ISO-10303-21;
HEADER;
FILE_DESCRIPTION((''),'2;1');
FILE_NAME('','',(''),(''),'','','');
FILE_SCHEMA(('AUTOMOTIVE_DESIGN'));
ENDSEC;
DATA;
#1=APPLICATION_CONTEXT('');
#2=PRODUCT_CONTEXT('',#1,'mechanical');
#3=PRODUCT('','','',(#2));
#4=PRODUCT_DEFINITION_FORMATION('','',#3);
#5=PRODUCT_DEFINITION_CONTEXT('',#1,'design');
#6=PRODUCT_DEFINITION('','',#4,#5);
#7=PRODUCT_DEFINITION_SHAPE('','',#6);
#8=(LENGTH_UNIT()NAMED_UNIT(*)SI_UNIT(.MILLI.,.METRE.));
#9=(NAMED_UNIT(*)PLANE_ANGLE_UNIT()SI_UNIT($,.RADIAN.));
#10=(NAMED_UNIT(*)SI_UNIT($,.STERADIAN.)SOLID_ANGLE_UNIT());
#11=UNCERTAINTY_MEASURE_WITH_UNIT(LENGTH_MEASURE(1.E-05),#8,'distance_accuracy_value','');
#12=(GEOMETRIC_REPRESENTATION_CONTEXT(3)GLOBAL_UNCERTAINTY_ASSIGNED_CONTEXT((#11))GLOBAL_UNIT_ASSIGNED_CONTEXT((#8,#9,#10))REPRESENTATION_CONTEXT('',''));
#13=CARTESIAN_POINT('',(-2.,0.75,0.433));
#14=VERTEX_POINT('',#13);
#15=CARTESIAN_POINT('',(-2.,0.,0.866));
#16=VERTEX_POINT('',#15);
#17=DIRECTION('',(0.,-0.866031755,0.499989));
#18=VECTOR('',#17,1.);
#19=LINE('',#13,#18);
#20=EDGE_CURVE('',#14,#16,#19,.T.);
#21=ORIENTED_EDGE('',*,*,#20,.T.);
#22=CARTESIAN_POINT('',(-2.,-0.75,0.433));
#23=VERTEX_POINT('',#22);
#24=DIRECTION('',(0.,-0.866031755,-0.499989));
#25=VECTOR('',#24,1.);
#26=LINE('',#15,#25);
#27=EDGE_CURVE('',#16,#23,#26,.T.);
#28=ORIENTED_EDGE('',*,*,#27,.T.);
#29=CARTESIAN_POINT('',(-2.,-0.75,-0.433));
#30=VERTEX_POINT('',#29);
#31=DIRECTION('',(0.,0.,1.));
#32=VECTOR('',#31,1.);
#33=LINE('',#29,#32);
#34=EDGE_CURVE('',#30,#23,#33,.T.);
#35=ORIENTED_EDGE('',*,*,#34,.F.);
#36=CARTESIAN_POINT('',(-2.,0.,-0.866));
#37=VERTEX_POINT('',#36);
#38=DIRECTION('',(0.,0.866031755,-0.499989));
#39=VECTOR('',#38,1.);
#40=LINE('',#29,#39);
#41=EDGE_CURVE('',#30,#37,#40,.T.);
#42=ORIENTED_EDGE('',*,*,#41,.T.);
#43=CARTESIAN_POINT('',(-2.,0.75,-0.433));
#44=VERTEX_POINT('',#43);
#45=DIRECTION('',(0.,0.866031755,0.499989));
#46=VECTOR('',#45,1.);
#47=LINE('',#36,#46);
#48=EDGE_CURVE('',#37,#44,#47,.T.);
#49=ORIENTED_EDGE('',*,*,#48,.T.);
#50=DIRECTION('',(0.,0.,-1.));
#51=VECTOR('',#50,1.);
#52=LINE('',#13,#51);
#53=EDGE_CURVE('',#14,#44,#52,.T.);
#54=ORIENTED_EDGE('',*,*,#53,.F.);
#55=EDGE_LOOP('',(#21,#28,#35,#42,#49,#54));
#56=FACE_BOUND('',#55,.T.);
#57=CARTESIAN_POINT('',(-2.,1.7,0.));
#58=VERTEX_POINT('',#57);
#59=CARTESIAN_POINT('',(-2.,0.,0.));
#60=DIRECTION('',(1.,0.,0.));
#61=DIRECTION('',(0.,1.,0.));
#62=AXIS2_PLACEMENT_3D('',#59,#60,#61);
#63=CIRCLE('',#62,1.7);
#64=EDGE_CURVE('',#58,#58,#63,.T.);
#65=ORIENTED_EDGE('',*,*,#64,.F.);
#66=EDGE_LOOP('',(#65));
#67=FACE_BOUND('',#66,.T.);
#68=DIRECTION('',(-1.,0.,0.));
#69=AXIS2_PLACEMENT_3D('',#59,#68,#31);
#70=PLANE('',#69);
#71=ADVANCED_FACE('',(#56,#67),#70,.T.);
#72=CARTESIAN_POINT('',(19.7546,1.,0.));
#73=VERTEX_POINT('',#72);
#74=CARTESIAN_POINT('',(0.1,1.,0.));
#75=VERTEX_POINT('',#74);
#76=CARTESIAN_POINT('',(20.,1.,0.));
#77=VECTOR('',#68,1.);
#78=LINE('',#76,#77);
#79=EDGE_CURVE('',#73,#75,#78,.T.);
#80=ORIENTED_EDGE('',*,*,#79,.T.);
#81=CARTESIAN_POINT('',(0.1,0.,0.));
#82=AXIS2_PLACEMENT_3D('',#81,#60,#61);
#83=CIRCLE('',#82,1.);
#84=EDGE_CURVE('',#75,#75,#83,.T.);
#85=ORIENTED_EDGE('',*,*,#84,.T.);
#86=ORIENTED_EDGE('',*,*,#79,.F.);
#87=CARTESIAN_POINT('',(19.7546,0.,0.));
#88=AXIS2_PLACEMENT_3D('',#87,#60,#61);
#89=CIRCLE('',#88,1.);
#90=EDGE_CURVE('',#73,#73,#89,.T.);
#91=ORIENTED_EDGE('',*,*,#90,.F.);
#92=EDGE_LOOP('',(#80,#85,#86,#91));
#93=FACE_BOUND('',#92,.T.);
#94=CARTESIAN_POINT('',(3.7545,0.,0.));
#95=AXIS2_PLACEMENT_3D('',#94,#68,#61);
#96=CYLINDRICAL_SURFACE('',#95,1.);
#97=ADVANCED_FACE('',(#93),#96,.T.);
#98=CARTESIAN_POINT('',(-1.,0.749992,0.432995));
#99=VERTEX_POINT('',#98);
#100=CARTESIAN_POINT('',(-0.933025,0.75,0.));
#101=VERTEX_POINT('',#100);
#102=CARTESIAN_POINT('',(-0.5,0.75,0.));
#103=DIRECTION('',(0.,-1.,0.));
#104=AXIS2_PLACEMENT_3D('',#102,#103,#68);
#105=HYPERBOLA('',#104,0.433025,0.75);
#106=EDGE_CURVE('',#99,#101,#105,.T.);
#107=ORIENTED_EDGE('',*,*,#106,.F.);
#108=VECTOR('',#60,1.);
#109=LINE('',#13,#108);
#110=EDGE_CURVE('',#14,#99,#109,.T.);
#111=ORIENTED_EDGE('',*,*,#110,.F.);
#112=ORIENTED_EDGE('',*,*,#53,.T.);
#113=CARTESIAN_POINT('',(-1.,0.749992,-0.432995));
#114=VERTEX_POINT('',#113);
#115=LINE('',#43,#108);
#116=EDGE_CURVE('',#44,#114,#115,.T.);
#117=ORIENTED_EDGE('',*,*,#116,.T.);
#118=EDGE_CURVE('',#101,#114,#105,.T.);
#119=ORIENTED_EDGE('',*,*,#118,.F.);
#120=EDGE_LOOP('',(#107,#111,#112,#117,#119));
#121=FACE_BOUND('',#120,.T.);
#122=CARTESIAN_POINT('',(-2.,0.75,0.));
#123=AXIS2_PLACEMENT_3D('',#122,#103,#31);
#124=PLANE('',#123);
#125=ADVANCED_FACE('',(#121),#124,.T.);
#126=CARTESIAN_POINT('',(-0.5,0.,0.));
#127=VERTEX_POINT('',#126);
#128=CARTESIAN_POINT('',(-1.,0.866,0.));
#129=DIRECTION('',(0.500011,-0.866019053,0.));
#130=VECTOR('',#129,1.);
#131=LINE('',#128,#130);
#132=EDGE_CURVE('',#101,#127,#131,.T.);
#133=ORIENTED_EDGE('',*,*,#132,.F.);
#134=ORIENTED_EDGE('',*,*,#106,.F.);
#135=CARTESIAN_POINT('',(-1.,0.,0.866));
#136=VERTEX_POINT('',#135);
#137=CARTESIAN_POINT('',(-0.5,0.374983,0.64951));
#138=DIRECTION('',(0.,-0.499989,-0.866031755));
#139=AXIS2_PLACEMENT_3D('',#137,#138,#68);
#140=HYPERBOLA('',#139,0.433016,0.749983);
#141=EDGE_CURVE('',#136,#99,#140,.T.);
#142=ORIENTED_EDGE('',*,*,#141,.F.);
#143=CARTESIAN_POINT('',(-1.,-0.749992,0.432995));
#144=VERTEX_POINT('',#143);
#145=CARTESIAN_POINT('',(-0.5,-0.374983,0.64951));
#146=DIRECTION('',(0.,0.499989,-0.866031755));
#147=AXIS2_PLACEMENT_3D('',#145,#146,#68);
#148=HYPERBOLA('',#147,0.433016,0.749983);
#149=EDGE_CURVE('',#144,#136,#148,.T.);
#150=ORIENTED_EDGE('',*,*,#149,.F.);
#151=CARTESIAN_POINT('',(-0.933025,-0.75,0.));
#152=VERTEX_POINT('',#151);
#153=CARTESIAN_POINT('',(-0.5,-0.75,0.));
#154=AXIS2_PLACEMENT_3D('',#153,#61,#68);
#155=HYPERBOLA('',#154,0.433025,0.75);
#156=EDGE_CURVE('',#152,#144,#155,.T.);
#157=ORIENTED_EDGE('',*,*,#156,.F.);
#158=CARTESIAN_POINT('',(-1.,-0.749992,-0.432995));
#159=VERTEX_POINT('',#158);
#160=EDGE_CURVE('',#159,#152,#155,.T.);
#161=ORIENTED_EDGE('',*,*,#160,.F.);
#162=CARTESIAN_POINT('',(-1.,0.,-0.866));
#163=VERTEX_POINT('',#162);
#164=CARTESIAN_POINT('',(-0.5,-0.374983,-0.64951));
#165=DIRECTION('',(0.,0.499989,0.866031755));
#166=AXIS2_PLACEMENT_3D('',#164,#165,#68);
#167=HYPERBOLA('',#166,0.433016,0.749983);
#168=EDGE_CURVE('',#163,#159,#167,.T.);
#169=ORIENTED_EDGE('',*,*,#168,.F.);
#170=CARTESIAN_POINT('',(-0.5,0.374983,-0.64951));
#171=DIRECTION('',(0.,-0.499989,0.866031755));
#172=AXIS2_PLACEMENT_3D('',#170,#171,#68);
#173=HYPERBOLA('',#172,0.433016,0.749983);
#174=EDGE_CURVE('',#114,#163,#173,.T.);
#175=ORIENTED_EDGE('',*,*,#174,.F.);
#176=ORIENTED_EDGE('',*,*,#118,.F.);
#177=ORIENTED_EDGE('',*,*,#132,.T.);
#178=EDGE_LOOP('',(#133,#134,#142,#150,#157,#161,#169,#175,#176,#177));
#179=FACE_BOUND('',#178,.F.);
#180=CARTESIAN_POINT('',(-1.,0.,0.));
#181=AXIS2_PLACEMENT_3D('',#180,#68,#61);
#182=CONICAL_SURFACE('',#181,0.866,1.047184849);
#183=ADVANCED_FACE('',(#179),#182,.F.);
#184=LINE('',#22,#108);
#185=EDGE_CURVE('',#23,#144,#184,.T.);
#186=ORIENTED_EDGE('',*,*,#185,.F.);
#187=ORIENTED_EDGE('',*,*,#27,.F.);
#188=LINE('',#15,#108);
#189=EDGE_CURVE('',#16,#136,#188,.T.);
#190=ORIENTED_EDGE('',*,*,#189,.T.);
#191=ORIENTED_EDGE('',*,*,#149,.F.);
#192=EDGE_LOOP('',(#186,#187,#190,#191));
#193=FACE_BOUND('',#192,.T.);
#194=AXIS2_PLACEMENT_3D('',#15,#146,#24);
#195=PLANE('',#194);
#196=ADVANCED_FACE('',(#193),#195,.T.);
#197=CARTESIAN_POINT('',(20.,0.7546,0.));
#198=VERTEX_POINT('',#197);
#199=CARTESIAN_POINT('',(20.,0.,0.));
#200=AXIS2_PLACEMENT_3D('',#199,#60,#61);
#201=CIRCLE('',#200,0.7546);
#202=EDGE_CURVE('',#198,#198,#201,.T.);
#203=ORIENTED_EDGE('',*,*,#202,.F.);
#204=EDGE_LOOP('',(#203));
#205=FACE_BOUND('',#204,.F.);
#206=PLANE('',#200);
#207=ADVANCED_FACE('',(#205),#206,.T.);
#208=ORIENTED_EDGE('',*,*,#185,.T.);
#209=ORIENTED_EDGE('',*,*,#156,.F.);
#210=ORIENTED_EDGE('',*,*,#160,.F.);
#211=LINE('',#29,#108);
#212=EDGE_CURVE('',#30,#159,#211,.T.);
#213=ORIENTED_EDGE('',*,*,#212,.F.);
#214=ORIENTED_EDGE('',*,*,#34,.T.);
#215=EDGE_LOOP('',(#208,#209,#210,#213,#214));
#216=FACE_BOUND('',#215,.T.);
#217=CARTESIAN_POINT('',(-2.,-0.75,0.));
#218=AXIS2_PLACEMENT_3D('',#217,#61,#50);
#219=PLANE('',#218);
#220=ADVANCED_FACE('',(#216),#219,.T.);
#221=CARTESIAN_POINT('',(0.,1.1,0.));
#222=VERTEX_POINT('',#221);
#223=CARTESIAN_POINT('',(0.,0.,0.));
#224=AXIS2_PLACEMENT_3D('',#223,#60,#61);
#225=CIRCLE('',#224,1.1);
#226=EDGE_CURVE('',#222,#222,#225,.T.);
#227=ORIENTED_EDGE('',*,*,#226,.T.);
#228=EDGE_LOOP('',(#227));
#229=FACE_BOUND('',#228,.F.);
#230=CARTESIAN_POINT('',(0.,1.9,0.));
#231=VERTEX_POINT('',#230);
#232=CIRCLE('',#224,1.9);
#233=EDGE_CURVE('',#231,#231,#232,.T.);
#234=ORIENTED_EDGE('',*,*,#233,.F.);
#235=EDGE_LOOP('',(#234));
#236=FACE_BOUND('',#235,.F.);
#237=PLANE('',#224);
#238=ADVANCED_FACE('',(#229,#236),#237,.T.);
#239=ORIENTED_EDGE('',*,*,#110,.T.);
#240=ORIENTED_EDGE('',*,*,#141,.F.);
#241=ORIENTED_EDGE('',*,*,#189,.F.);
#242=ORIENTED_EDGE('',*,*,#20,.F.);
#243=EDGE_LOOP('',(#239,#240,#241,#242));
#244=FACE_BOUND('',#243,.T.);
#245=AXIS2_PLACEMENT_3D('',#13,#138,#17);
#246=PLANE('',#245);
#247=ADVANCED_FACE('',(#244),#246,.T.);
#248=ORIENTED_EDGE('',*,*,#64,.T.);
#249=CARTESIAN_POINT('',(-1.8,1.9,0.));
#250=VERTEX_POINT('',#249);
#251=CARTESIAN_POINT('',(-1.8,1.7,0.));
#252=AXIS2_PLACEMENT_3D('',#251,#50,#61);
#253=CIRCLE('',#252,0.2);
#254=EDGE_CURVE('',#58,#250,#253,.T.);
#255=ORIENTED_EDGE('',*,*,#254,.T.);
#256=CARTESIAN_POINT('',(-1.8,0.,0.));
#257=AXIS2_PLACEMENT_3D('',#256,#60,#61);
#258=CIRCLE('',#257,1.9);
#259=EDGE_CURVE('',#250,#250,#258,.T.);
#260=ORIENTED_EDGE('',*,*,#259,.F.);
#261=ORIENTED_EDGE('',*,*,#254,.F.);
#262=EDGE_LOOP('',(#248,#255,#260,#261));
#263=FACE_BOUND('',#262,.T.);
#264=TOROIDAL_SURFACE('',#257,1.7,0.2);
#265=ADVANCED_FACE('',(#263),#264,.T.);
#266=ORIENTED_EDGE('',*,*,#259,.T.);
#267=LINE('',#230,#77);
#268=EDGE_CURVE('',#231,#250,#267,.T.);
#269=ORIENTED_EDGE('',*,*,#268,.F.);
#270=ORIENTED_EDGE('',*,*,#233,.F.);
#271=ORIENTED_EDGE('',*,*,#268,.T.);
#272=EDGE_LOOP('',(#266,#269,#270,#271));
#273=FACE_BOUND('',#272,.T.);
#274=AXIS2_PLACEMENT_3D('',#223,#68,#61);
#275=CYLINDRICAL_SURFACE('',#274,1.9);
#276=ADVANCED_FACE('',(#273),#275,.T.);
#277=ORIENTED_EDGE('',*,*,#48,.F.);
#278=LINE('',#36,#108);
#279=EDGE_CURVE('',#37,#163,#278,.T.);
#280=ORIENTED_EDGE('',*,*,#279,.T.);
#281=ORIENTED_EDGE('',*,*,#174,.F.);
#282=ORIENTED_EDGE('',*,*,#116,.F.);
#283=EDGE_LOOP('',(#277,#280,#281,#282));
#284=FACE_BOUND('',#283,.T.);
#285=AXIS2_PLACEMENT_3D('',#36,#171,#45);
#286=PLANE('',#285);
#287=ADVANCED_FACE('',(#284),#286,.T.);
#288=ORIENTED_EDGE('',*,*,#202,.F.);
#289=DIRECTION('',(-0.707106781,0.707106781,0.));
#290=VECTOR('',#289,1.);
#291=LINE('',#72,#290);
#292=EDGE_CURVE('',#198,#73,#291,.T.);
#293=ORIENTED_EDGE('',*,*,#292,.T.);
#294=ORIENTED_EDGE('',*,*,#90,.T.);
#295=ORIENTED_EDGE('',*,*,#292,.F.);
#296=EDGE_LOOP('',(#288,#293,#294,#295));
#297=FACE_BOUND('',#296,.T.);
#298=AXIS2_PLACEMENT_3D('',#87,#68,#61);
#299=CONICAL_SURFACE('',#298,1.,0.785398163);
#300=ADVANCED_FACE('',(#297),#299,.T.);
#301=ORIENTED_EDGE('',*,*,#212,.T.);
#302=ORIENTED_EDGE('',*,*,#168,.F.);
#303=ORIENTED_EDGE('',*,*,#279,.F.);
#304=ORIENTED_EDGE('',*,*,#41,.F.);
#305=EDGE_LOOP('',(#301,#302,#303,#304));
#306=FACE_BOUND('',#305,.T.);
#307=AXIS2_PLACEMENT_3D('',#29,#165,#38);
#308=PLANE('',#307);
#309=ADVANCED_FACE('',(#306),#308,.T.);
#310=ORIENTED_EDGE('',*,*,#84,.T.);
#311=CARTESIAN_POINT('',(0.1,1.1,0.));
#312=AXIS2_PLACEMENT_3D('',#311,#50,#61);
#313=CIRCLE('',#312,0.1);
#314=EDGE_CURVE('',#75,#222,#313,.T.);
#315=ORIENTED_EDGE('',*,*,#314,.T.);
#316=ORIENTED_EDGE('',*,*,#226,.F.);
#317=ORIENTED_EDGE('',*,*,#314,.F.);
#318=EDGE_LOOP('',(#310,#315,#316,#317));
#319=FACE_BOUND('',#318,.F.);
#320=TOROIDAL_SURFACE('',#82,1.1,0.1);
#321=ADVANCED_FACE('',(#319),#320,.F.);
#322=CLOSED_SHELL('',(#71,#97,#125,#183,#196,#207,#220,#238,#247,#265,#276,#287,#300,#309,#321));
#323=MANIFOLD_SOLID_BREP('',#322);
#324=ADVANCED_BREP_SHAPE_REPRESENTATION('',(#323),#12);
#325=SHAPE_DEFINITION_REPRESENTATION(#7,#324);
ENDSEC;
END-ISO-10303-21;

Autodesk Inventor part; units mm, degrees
ref_plane "YZ Plane" through (0, 0, 0) normal (1, 0, 0) x (0, 1, 0)
ref_plane "XZ Plane" through (0, 0, 0) normal (0, 1, 0) x (-1, 0, 0)
sketch "Sketch1" plane through (0, 0, 0) normal (0, 0, 1) x (1, 0, 0)
  line L0 (-0.5, 0) -> (20, 0)
  line L1 (20, 0) -> (20, 1)
  line L2 (20, 1) -> (4, 1)
  line L3 (4, 1) -> (3.7545, 1)
  line L4 (3.7545, 1) -> (0, 1)
  line L5 (0, 1) -> (0, 1.9)
  line L6 (0, 1.9) -> (-2, 1.9)
  line L7 (-2, 1.9) -> (-2, 0.866)
  line L8 (-2, 0.866) -> (-1, 0.866)
  line L9 (-1, 0.866) -> (-0.5, 0)
  line L10 (-6.4, 0) -> (24.4, 0) projected
  line L11 (0, -0.38) -> (0, 2.28) projected
  line L12 (4, 1) -> (0, 1) construction
  dimension "d1" = 16
  dimension "d2" = 0.2455
  dimension "d3" = 2
  dimension "d4" = 1
  dimension "d5" = 60
  dimension "d6" = 2
  dimension "d7" = 2
  dimension "d8" = 1.7321
  dimension "d9" = 3.8
  dimension "d26" = 20
revolve "Body" add sketch "Sketch1" angle 360 about axis through (-0.5, 0, 0) along (1, 0, 0)
sketch "Sketch2" plane through (-2, 0, 0) normal (-1, 0, 0) x (0, 0, 1)
  circle A0 centre (0, 0) radius 0.866 projected
  line L0 (0, -2.66) -> (0, 2.66) projected
  line L1 (-2.66, 0) -> (2.66, 0) projected
  line L2 (0.866, 0) -> (0.433, -0.75)
  line L3 (0.433, -0.75) -> (-0.433, -0.75)
  line L4 (-0.433, -0.75) -> (-0.866, 0)
  line L5 (-0.866, 0) -> (-0.433, 0.75)
  line L6 (-0.433, 0.75) -> (0.433, 0.75)
  line L7 (0.433, 0.75) -> (0.866, 0)
extrude "Slot" add sketch "Sketch2" against normal up to next contours L7 A0 | A0 L2 | L6 L0 A0 | A0 L0 L3 | L0 L6 A0 | A0 L3 L0 | L4 A0 | A0 L5
fillet "Fillet1" radius 0.2 1 edges at (-2, -1.9, 0)
thread "Thread" size "M2x0.4" class "6g" standard "ISO Metric profile" length 16
chamfer "Chamfer1" distance 0.2454 distance2 0.2454 1 edges at (20, -1, 0) measured on face at (20, -0.4443, -0.4503)
ref_plane "Work Plane1" through (29, 0, 0) normal (0, -1, 0) x (1, 0, 0)
fillet "Fillet2" radius 0.1 1 edges at (0, -1, 0)
equation "\"d30\" = R"
equation "\"d17\" = RR"
equation "\"d13\" = GEL"
equation "\"d15\" = -0.5 * SPD + 0.5 * GD"
equation "\"d16\" = GUL"
equation "\"d1\" = GEL"
equation "\"d3\" = KOH"
equation "\"d4\" = INTI"
equation "\"d6\" = GD"
equation "\"d7\" = BDM"
equation "\"d8\" = 1.1547 * SW"
equation "\"d9\" = KOD"
equation "\"d26\" = NLG"
equation "\"GD\" = NND"
equation "\"NLG\" = 20"
equation "\"GEL\" = 16"
equation "\"KOD\" = 3.8"
equation "\"KOH\" = 2"
equation "\"INTI\" = 1"
equation "\"GAL\" = 0.61345 * PTC"
equation "\"GUL\" = 0.61345 * PTC"
equation "\"BDM\" = NND"
equation "\"SW\" = 1.5"
equation "\"RR\" = 0.2"
equation "\"SPD\" = 1.50924"
equation "\"R\" = 0.1"
equation "\"TOA\" = 30deg"
equation "\"THREADDIA\" = 2"
equation "\"PTC\" = 0.4"
equation "\"NND\" = 2"
equation "\"E0\" = 1.155 * SW"
equation "\"GD1\" = THREADDIA - 1.2269 * PTC"
properties part number "ANSI B18.3.1M - M2x0.4 x 20, FSHCSM" material "Steel, Mild"
